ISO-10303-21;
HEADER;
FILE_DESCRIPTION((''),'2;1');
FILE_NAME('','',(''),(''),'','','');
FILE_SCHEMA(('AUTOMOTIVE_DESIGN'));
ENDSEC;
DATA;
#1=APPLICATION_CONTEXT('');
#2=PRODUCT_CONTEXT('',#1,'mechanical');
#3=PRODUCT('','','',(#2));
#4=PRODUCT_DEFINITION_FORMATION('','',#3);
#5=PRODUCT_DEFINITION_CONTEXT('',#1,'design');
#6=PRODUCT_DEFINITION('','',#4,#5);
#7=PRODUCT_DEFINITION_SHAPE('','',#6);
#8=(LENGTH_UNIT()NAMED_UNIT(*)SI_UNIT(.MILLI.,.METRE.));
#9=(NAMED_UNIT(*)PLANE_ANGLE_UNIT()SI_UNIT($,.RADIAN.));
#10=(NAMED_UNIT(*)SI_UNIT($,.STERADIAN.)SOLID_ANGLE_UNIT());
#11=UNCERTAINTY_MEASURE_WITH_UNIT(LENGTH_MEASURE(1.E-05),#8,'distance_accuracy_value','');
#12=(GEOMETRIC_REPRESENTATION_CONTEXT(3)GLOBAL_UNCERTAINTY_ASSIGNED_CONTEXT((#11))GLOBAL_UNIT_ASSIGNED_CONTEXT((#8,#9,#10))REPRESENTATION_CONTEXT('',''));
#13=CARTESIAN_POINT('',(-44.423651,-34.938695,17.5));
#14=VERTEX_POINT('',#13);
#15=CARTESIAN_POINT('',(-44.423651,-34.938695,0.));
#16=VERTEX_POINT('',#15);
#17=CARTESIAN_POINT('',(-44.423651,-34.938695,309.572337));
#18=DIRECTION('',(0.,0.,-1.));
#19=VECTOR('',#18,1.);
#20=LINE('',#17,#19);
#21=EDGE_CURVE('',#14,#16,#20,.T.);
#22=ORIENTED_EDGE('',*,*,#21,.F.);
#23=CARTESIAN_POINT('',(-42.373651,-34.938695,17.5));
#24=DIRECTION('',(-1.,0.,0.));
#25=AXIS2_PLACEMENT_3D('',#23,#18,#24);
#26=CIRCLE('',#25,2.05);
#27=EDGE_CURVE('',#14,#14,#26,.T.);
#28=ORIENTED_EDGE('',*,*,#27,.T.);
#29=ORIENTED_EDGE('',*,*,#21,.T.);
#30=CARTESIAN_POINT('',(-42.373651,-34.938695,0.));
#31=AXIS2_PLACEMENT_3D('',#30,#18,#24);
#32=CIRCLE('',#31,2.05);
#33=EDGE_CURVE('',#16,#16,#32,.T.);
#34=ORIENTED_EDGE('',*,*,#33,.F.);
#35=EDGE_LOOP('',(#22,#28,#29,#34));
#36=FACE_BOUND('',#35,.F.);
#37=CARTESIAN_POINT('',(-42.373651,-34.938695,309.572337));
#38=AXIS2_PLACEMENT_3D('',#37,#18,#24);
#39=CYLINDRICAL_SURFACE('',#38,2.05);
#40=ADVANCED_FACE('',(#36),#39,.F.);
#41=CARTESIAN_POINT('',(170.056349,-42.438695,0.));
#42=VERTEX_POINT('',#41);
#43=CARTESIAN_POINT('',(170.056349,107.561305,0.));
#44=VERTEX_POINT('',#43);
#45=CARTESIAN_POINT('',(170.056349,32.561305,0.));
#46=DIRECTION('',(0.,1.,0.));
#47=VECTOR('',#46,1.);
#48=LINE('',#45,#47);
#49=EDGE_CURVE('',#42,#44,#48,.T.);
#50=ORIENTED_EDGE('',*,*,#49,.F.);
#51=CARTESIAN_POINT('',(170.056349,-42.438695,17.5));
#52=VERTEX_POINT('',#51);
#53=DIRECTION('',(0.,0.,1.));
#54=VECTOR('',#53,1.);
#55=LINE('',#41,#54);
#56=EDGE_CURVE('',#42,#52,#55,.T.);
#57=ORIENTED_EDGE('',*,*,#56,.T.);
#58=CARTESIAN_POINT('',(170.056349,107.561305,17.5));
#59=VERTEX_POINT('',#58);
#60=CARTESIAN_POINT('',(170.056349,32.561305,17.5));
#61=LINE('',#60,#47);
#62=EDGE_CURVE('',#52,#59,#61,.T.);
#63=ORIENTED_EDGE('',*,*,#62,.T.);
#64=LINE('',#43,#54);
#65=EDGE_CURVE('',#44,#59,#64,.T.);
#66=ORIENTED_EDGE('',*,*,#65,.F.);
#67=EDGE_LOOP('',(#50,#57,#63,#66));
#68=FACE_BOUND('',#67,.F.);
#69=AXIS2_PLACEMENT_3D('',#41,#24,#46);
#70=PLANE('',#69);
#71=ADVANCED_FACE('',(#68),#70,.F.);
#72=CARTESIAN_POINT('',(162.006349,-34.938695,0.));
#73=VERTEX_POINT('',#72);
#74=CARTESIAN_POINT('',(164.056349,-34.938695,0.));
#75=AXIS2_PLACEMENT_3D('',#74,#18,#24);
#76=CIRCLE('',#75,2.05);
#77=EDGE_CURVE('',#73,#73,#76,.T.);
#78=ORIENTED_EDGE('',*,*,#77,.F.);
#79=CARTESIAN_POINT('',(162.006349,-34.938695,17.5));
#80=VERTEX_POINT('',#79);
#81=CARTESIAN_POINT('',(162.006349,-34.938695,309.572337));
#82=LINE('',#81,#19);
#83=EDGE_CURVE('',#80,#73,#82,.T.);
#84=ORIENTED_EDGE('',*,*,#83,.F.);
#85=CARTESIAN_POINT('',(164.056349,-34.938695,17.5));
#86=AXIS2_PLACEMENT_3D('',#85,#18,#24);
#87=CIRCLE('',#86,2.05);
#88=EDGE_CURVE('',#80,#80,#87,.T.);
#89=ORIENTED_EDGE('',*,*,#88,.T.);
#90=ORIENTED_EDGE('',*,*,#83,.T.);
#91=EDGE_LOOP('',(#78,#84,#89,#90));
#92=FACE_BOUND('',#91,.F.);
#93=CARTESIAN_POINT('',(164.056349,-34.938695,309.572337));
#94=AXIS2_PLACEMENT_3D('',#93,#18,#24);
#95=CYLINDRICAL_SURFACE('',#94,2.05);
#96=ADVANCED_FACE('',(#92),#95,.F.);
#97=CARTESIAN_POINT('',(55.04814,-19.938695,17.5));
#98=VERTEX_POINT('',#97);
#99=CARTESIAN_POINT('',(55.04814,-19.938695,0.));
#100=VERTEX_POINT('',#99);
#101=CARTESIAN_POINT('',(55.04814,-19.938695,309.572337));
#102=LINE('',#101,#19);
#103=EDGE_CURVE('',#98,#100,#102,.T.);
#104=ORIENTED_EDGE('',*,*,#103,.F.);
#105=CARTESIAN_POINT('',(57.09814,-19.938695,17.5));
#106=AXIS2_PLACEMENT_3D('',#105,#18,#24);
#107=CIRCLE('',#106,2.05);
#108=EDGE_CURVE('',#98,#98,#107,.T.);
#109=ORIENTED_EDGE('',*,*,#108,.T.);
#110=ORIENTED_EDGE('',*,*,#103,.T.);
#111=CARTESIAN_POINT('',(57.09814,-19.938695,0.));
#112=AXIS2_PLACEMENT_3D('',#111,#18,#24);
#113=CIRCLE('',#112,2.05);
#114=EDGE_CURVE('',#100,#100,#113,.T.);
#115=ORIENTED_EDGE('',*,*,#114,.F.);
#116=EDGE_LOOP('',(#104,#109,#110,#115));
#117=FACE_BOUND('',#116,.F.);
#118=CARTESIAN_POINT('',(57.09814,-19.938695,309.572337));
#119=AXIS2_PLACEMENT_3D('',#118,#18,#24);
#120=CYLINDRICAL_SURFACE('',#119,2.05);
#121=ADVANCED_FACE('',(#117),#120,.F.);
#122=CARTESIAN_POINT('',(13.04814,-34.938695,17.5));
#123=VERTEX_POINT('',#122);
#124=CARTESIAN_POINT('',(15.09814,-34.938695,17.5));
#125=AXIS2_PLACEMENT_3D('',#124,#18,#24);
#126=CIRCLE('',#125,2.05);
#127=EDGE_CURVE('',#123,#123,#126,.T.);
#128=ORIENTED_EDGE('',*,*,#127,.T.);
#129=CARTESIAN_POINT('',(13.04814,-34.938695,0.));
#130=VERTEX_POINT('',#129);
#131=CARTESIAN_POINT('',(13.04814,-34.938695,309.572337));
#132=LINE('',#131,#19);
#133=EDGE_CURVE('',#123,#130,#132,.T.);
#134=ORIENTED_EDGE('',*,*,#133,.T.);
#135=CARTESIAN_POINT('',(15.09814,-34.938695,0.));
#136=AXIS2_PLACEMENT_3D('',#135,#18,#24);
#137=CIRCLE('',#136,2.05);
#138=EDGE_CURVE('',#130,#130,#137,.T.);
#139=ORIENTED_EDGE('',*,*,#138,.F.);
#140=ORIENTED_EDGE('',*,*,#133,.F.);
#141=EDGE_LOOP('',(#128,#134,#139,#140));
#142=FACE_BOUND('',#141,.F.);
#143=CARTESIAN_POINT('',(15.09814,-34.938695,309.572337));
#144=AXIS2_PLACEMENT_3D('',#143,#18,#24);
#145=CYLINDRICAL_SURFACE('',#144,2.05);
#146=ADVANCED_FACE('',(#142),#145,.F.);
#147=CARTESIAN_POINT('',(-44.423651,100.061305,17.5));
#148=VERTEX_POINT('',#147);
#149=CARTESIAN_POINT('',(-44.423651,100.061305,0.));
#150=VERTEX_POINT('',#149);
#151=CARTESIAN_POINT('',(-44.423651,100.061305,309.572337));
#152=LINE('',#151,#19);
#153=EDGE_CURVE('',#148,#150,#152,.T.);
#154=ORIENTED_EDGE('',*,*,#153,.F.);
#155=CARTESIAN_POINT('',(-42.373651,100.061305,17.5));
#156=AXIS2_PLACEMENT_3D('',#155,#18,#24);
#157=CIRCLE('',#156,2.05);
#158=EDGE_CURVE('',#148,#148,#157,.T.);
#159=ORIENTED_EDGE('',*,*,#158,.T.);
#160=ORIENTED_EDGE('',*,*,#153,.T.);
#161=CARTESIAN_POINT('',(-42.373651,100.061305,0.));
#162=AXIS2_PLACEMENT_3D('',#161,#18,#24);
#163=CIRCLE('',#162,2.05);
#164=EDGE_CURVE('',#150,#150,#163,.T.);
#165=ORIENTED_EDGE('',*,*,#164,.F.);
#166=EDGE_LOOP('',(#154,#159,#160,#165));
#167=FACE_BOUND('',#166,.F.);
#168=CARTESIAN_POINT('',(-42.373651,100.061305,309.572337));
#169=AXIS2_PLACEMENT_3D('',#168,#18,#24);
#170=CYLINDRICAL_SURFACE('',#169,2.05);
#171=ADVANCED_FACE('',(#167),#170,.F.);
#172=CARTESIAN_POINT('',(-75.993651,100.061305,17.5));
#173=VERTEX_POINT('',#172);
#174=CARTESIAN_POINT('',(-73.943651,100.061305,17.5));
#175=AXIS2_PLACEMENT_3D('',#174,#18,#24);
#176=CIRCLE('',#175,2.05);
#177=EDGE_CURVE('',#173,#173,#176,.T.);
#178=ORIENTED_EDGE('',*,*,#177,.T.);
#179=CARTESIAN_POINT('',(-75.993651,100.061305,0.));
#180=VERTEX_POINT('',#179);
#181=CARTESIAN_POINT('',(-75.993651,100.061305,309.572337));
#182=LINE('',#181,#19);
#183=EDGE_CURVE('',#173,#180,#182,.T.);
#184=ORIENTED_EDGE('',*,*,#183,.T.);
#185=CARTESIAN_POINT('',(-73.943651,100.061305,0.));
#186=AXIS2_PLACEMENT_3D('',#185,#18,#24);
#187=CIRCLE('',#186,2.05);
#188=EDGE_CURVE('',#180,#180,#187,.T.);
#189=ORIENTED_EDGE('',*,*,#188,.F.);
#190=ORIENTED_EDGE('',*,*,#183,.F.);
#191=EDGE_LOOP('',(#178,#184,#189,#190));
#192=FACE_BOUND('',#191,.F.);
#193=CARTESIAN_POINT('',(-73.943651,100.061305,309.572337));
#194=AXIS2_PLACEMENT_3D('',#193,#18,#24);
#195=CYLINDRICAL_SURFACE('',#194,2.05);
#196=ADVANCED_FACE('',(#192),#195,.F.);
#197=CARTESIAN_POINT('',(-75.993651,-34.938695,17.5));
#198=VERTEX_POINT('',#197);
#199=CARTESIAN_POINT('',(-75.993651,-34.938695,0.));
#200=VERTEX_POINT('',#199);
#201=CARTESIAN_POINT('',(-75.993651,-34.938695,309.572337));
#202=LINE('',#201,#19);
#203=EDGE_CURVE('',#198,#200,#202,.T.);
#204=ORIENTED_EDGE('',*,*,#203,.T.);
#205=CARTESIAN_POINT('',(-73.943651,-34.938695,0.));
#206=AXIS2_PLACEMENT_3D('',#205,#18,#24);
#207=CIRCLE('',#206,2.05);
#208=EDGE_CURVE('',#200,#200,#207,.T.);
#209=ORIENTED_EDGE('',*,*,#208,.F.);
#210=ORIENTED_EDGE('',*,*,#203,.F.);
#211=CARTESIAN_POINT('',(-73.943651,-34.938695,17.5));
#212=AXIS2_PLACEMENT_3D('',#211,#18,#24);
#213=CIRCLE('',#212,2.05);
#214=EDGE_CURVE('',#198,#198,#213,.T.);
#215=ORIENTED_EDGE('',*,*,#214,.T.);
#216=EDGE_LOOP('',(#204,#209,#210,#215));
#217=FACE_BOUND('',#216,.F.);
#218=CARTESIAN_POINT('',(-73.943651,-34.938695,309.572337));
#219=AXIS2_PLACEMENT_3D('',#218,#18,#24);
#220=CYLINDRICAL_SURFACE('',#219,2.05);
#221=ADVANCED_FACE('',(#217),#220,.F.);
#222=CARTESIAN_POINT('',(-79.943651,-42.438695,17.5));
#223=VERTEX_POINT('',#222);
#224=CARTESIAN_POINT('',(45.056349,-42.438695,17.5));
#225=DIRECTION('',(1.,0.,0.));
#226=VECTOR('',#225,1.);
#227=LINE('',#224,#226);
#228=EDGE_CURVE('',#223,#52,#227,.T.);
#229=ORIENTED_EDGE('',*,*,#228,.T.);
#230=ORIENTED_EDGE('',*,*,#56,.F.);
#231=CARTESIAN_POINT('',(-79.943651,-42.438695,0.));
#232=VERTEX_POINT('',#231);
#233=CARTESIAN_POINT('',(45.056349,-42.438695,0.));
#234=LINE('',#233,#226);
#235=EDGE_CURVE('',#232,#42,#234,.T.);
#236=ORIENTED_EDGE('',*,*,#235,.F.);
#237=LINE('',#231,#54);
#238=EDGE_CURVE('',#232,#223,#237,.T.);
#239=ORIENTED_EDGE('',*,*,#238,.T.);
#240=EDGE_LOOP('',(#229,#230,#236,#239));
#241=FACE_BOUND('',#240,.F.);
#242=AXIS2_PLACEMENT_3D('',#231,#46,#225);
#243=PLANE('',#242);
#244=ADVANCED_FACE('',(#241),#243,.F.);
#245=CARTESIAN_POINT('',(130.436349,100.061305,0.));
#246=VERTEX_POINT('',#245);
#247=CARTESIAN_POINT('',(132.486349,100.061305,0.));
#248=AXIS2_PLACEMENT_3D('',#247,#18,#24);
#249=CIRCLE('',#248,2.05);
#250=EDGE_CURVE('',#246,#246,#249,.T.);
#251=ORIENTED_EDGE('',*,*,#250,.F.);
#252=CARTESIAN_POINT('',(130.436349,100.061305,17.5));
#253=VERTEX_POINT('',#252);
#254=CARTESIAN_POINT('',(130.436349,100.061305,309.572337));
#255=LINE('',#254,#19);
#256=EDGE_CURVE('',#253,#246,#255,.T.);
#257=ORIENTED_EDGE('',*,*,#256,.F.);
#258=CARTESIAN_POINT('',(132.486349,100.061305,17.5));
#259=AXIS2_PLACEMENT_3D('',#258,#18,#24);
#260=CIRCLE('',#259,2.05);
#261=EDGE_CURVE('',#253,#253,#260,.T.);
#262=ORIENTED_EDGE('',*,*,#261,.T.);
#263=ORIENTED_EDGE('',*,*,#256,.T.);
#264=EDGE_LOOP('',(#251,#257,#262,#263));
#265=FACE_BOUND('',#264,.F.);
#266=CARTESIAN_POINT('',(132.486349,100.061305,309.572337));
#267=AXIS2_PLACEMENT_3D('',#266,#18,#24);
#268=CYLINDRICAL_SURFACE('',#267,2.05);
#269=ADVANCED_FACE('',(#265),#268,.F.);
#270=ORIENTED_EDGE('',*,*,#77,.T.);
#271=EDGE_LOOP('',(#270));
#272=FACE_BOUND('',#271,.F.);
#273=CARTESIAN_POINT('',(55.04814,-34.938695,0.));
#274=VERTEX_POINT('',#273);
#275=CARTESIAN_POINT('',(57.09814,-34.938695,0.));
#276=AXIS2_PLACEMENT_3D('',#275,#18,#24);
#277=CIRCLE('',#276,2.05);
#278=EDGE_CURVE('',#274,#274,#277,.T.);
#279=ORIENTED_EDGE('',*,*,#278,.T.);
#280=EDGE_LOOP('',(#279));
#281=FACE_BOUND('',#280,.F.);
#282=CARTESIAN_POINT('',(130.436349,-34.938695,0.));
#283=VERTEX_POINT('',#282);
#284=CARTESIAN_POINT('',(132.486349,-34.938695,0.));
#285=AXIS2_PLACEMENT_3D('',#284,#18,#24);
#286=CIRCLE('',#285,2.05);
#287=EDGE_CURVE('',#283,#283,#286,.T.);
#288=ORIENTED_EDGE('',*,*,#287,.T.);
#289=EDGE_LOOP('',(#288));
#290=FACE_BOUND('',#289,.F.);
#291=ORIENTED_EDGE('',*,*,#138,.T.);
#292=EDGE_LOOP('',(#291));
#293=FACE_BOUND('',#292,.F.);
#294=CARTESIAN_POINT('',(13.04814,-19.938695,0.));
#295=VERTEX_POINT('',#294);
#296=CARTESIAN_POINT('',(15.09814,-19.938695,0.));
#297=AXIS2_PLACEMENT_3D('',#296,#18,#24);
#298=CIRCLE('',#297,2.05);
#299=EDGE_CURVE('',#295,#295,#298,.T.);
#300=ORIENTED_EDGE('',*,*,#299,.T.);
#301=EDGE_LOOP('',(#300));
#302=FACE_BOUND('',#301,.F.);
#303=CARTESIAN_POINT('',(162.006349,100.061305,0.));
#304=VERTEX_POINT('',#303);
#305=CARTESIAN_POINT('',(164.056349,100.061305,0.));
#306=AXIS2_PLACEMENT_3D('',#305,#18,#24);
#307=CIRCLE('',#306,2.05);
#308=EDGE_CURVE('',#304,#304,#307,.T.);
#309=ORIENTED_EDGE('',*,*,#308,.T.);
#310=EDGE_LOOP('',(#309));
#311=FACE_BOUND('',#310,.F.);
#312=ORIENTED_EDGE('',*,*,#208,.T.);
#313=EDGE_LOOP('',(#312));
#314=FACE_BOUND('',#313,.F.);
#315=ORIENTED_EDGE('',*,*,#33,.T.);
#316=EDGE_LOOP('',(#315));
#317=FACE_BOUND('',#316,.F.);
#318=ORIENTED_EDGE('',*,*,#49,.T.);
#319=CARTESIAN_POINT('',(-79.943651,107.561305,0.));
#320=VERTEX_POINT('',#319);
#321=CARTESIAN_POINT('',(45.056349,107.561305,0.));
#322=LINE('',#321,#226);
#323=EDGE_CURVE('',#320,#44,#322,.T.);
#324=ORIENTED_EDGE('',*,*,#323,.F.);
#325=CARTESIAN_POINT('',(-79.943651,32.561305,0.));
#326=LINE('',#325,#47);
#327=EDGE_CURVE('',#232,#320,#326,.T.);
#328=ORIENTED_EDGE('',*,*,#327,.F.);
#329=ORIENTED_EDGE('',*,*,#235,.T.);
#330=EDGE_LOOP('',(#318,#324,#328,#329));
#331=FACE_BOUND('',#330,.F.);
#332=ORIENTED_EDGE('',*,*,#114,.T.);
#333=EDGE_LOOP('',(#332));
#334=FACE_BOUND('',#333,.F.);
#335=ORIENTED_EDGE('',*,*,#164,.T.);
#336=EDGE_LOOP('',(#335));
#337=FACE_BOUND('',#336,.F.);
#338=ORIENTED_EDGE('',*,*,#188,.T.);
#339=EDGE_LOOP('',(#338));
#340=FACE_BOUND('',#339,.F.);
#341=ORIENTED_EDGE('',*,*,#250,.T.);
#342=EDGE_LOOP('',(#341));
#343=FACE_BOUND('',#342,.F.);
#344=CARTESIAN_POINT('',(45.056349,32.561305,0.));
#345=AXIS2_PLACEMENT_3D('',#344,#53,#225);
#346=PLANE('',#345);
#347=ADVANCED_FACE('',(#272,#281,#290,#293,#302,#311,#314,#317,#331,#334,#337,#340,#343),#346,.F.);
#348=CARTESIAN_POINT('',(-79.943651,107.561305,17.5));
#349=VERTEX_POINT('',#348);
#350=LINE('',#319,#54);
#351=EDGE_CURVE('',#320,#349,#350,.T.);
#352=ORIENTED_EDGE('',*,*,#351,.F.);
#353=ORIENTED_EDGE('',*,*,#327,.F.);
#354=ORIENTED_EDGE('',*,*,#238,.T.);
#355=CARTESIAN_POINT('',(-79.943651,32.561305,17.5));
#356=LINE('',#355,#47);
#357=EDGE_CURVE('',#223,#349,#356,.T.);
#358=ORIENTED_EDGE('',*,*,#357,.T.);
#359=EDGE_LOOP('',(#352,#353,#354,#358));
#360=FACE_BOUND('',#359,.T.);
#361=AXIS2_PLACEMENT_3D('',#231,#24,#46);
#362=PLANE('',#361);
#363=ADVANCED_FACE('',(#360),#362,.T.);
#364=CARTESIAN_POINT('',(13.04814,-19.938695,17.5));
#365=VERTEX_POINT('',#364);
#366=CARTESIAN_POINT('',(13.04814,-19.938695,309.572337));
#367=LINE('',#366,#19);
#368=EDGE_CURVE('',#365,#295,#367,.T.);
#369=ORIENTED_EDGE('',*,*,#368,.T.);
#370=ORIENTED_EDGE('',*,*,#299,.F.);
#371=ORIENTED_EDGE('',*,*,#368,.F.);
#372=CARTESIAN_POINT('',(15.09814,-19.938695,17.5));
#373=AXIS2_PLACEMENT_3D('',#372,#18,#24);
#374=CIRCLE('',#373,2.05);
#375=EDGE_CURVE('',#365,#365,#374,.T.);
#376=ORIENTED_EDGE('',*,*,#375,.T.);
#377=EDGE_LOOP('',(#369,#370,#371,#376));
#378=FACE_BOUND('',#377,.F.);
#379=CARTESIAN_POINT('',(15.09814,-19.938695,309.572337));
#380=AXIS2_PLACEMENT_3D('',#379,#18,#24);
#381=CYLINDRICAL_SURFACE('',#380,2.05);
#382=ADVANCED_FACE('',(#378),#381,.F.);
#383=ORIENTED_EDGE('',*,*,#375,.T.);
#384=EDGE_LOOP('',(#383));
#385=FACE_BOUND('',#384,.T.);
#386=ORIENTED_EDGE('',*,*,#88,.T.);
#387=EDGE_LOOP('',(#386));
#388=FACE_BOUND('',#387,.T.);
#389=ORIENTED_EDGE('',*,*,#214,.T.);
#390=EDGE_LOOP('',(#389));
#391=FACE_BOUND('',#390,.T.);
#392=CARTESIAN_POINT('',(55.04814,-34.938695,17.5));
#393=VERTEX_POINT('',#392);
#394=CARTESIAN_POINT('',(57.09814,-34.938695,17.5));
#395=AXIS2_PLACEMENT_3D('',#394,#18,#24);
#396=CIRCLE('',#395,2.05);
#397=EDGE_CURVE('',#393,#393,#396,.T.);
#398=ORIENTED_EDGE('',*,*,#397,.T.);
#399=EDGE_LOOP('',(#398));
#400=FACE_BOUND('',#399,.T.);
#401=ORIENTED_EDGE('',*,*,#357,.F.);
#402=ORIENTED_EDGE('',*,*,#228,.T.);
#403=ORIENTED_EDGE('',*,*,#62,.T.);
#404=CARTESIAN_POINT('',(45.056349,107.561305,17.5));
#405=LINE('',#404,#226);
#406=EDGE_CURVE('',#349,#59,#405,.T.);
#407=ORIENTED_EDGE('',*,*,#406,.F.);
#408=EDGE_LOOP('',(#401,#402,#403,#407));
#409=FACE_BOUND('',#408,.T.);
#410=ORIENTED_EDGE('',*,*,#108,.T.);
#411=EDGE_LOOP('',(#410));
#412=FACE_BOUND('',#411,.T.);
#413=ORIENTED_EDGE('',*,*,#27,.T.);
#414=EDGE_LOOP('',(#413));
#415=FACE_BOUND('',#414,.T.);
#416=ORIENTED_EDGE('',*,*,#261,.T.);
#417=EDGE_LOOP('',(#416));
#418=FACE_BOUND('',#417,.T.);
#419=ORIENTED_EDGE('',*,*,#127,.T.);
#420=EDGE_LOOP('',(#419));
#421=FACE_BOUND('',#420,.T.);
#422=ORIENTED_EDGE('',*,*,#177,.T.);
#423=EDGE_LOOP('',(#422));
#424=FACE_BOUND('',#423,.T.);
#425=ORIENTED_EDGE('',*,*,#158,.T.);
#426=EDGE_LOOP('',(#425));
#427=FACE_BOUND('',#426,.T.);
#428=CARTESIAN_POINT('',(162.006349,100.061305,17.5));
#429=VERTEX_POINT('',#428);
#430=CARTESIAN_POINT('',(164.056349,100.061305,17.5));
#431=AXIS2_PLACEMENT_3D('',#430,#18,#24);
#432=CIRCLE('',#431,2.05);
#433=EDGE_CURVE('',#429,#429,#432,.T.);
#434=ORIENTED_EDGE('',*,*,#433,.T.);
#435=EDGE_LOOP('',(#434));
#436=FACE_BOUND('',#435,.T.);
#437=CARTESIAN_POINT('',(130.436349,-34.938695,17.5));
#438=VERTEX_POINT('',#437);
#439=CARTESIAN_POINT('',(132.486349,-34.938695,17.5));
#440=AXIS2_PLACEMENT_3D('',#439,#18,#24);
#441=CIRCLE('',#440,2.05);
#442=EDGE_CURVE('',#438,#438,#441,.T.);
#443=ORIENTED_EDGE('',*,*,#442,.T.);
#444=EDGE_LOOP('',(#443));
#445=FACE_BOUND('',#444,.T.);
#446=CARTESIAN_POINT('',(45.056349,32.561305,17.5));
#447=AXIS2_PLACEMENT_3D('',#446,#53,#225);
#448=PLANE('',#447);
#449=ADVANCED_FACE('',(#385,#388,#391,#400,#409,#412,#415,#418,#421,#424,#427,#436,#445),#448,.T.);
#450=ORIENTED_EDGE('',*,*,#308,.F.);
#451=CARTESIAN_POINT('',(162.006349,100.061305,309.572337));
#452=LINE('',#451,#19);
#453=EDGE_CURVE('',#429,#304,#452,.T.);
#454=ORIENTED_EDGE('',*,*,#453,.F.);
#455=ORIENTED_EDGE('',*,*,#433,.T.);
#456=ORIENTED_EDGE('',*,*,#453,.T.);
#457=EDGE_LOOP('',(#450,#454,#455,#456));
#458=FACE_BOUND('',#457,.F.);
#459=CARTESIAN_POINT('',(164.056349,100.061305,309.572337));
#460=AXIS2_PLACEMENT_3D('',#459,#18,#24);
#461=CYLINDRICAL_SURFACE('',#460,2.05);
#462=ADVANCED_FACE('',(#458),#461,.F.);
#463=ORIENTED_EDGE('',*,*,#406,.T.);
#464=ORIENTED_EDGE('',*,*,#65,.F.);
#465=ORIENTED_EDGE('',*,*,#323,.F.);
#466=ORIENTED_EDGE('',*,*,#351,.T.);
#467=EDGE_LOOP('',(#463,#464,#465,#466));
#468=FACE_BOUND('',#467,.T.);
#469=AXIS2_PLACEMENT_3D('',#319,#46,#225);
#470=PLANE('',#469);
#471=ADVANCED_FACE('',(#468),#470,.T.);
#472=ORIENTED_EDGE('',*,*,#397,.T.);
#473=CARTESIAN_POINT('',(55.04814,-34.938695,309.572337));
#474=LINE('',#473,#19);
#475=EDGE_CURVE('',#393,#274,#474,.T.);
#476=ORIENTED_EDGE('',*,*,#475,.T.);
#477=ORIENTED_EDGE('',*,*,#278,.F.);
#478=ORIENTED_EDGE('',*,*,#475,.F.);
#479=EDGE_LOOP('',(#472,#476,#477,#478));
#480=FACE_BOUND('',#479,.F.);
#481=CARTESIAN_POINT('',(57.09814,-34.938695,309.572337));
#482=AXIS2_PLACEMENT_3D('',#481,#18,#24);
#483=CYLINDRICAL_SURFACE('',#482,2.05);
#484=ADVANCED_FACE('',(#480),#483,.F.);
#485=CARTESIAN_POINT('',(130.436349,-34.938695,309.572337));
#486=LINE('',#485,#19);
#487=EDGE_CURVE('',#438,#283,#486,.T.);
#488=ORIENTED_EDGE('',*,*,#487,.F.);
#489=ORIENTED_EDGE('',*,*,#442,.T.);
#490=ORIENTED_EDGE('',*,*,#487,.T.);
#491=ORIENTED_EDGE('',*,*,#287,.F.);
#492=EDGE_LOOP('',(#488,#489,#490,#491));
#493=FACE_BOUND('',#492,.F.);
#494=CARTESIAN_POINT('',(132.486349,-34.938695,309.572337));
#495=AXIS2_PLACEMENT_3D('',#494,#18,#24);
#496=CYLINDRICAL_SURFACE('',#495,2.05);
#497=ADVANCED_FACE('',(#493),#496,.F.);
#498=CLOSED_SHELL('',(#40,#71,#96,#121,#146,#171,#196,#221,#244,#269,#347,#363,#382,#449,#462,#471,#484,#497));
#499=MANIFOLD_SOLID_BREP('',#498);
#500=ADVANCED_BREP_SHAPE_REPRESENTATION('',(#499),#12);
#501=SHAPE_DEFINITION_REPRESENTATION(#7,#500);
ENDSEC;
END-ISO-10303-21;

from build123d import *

# Parameters (mm, degrees)
F0_W     = 250
F0_H     = 150
F1_DEPTH = 17.5
F3_D     = 4.1


# Not quite as in the source:
# - the program builds the solid bodies; features that only make, move or delete a surface that nothing else refers to are left out


with BuildPart() as f1:
    # F0 (on Top) → F1 (new body)
    with BuildSketch(Plane.XY):
        with Locations((45.0563491821, 32.5613047183)):
            Rectangle(F0_W, F0_H)
    extrude(amount=F1_DEPTH)

    # F3 (through all)
    with Locations(Plane.XY.offset(17.5)):
        with Locations((-73.9436508179, 100.0613047183), (-42.3736508179, 100.0613047183), (132.4863491821, 100.0613047183), (164.0563491821, 100.0613047183), (164.0563491821, -34.9386952817), (132.4863491821, -34.9386952817), (57.0981395915, -19.9386952817), (57.0981395915, -34.9386952817), (15.0981395915, -19.9386952817), (15.0981395915, -34.9386952817), (-42.3736508179, -34.9386952817), (-73.9436508179, -34.9386952817)):
            Hole(F3_D / 2)


solid = f1.part
